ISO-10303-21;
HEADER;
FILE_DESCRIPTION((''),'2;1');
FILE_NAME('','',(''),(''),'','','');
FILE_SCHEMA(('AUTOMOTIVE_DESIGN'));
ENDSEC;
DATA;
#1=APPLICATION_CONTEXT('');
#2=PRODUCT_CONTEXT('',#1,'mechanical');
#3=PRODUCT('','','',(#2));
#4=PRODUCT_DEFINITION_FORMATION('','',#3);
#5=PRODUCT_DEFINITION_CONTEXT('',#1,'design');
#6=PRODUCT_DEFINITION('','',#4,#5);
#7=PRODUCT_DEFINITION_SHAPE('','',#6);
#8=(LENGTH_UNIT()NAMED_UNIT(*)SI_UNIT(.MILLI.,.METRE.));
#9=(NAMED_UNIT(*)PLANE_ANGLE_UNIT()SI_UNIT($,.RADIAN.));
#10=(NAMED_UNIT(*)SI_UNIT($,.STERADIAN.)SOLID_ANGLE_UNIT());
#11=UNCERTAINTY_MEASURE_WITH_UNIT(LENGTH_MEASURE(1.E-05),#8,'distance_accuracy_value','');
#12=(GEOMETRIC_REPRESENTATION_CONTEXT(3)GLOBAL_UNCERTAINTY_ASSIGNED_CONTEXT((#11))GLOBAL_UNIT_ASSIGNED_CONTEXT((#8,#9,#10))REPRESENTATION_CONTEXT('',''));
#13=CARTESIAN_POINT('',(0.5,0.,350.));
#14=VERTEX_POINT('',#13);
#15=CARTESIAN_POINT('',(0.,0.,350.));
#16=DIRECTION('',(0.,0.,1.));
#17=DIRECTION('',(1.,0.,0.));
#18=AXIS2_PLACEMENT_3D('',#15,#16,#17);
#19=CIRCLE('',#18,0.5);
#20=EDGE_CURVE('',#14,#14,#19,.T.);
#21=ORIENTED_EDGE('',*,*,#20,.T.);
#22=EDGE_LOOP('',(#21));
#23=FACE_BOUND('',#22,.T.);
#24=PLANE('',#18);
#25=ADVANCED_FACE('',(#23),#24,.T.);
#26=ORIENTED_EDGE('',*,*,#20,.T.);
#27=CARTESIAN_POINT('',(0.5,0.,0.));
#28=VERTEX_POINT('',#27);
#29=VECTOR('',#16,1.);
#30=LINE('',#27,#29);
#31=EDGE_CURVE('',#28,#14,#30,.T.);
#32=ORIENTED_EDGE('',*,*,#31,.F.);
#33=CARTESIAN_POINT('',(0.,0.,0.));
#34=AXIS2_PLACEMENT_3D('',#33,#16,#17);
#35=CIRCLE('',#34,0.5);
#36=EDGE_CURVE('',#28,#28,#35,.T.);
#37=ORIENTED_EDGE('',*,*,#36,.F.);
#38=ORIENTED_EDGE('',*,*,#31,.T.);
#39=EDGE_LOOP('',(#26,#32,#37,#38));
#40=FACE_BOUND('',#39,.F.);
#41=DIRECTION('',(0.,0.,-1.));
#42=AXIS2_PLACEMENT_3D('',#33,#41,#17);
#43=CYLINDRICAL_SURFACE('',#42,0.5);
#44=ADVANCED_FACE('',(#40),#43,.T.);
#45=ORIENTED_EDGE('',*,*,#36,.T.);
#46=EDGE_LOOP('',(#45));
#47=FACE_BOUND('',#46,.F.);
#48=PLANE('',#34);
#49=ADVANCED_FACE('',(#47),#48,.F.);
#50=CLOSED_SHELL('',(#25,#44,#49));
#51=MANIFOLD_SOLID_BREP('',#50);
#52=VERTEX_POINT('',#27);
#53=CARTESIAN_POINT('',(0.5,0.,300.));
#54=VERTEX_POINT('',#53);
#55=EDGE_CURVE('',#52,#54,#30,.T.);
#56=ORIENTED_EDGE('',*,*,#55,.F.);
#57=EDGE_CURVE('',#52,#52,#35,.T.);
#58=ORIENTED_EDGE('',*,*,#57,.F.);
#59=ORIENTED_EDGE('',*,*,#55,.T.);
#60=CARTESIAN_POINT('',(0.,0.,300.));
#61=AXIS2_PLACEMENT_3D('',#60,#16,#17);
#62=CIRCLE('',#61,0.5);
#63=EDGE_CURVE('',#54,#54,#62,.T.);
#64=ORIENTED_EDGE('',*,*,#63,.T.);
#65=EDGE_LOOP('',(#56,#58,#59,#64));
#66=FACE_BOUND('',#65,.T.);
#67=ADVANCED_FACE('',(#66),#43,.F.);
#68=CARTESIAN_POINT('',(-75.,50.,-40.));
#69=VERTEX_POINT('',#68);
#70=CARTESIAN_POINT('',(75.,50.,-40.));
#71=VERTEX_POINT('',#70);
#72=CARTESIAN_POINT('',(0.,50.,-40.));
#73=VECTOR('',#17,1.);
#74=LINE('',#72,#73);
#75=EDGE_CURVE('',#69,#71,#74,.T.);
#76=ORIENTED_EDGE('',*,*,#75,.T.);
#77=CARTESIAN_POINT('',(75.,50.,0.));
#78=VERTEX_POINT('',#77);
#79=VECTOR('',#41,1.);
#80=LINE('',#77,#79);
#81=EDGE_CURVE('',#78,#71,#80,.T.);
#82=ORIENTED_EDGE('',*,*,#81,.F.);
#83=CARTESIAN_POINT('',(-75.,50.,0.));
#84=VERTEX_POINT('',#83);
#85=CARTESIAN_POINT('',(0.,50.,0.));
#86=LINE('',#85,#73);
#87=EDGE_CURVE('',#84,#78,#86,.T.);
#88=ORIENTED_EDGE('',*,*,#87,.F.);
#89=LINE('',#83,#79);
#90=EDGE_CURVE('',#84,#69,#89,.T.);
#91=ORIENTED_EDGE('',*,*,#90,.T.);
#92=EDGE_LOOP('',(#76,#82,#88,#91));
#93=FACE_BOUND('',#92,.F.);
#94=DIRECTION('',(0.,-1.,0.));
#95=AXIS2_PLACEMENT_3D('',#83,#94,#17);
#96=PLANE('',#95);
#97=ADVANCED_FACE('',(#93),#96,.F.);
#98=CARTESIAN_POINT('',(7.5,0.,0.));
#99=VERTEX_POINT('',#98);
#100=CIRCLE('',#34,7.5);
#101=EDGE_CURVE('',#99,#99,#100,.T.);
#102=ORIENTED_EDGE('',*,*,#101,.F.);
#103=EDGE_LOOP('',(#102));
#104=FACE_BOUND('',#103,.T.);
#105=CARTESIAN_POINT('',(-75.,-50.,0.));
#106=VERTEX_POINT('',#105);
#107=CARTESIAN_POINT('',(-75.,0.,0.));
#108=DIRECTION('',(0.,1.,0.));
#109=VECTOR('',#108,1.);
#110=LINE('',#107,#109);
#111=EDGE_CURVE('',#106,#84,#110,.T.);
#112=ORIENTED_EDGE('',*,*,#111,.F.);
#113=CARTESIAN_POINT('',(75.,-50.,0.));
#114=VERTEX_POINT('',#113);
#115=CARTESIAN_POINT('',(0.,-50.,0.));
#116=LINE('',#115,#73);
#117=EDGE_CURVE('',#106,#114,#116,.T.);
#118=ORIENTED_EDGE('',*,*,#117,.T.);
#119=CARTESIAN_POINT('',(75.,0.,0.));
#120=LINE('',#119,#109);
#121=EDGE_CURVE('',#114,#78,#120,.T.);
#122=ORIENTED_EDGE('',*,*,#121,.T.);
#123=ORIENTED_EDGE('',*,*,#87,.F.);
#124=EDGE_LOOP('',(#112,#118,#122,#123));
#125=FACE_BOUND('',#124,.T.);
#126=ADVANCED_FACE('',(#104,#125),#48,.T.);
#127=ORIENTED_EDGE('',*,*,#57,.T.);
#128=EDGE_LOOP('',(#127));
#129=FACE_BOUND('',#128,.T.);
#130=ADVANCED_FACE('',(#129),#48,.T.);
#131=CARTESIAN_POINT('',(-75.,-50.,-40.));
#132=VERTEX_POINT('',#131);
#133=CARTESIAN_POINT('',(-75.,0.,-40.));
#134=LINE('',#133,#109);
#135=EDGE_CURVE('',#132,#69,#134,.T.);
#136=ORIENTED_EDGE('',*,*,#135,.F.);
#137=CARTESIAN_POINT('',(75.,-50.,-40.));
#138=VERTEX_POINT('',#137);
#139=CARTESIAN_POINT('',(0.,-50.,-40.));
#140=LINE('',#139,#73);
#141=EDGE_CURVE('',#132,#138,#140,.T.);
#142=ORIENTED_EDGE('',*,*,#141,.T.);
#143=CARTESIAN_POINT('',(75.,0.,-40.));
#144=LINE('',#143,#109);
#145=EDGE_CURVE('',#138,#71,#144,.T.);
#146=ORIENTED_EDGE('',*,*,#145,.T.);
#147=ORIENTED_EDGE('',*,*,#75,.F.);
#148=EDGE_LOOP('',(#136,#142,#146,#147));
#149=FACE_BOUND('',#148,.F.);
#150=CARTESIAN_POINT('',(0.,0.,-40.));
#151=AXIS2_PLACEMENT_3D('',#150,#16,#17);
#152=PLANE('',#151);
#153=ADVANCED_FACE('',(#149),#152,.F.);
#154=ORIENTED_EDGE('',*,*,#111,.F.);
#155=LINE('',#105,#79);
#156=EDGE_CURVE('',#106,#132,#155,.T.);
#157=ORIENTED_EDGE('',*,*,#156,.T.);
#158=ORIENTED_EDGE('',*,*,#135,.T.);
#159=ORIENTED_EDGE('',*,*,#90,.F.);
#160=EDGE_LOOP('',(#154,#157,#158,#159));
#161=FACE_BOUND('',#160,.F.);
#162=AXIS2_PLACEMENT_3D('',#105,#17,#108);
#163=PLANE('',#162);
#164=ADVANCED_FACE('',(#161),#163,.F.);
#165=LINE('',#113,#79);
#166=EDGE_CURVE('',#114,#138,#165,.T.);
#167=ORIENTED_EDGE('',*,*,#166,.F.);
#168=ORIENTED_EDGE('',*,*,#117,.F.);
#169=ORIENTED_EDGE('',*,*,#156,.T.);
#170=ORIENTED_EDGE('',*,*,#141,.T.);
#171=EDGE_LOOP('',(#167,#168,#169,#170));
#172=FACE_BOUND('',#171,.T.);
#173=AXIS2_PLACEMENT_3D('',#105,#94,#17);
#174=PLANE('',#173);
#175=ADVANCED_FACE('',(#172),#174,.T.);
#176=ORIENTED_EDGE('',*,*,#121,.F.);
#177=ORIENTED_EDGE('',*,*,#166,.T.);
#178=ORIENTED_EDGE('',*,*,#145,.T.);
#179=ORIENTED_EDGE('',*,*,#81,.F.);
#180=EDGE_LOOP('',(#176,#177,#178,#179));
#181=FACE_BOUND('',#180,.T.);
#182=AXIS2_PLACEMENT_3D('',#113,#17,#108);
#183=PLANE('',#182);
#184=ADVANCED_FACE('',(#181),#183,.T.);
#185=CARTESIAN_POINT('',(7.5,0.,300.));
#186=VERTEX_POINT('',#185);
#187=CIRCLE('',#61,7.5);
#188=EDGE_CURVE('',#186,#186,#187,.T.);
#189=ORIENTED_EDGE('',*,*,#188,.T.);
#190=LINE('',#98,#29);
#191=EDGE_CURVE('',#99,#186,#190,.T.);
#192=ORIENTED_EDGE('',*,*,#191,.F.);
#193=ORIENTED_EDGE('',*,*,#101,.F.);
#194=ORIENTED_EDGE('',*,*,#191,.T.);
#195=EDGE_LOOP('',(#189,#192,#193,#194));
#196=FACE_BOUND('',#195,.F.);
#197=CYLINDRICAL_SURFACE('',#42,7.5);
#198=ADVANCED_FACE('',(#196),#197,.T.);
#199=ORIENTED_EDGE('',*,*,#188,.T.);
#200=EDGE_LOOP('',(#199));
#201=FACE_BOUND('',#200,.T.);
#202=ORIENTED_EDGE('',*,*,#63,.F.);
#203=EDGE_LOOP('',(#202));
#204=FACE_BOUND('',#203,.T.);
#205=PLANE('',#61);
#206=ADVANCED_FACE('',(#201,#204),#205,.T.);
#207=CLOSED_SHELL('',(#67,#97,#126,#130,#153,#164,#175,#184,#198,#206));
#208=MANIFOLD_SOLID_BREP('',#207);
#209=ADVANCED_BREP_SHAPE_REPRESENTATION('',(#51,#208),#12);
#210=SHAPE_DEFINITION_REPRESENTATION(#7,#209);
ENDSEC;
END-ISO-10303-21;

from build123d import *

# Parameters (mm, degrees)
F0_W     = 150
F0_H     = 100
F1_DEPTH = 40
F2_R     = 0.5
F3_DEPTH = 350
F2_R_2   = 7.5
F4_DEPTH = 300


with BuildPart() as f1:
    # F0 (on Top) → F1 (new body)
    with BuildSketch(Plane.XY):
        Rectangle(F0_W, F0_H)
    extrude(amount=-F1_DEPTH)

    # F2 (on Top) → F4 (join)
    with BuildSketch(Plane.XY):
        Circle(F2_R_2)
        Circle(F2_R, mode=Mode.SUBTRACT)
    extrude(amount=F4_DEPTH)


with BuildPart() as f3:
    # F2 (on Top) → F3 (new body)
    with BuildSketch(Plane.XY):
        Circle(F2_R)
    extrude(amount=F3_DEPTH)


solid = Compound([f1.part, f3.part])
